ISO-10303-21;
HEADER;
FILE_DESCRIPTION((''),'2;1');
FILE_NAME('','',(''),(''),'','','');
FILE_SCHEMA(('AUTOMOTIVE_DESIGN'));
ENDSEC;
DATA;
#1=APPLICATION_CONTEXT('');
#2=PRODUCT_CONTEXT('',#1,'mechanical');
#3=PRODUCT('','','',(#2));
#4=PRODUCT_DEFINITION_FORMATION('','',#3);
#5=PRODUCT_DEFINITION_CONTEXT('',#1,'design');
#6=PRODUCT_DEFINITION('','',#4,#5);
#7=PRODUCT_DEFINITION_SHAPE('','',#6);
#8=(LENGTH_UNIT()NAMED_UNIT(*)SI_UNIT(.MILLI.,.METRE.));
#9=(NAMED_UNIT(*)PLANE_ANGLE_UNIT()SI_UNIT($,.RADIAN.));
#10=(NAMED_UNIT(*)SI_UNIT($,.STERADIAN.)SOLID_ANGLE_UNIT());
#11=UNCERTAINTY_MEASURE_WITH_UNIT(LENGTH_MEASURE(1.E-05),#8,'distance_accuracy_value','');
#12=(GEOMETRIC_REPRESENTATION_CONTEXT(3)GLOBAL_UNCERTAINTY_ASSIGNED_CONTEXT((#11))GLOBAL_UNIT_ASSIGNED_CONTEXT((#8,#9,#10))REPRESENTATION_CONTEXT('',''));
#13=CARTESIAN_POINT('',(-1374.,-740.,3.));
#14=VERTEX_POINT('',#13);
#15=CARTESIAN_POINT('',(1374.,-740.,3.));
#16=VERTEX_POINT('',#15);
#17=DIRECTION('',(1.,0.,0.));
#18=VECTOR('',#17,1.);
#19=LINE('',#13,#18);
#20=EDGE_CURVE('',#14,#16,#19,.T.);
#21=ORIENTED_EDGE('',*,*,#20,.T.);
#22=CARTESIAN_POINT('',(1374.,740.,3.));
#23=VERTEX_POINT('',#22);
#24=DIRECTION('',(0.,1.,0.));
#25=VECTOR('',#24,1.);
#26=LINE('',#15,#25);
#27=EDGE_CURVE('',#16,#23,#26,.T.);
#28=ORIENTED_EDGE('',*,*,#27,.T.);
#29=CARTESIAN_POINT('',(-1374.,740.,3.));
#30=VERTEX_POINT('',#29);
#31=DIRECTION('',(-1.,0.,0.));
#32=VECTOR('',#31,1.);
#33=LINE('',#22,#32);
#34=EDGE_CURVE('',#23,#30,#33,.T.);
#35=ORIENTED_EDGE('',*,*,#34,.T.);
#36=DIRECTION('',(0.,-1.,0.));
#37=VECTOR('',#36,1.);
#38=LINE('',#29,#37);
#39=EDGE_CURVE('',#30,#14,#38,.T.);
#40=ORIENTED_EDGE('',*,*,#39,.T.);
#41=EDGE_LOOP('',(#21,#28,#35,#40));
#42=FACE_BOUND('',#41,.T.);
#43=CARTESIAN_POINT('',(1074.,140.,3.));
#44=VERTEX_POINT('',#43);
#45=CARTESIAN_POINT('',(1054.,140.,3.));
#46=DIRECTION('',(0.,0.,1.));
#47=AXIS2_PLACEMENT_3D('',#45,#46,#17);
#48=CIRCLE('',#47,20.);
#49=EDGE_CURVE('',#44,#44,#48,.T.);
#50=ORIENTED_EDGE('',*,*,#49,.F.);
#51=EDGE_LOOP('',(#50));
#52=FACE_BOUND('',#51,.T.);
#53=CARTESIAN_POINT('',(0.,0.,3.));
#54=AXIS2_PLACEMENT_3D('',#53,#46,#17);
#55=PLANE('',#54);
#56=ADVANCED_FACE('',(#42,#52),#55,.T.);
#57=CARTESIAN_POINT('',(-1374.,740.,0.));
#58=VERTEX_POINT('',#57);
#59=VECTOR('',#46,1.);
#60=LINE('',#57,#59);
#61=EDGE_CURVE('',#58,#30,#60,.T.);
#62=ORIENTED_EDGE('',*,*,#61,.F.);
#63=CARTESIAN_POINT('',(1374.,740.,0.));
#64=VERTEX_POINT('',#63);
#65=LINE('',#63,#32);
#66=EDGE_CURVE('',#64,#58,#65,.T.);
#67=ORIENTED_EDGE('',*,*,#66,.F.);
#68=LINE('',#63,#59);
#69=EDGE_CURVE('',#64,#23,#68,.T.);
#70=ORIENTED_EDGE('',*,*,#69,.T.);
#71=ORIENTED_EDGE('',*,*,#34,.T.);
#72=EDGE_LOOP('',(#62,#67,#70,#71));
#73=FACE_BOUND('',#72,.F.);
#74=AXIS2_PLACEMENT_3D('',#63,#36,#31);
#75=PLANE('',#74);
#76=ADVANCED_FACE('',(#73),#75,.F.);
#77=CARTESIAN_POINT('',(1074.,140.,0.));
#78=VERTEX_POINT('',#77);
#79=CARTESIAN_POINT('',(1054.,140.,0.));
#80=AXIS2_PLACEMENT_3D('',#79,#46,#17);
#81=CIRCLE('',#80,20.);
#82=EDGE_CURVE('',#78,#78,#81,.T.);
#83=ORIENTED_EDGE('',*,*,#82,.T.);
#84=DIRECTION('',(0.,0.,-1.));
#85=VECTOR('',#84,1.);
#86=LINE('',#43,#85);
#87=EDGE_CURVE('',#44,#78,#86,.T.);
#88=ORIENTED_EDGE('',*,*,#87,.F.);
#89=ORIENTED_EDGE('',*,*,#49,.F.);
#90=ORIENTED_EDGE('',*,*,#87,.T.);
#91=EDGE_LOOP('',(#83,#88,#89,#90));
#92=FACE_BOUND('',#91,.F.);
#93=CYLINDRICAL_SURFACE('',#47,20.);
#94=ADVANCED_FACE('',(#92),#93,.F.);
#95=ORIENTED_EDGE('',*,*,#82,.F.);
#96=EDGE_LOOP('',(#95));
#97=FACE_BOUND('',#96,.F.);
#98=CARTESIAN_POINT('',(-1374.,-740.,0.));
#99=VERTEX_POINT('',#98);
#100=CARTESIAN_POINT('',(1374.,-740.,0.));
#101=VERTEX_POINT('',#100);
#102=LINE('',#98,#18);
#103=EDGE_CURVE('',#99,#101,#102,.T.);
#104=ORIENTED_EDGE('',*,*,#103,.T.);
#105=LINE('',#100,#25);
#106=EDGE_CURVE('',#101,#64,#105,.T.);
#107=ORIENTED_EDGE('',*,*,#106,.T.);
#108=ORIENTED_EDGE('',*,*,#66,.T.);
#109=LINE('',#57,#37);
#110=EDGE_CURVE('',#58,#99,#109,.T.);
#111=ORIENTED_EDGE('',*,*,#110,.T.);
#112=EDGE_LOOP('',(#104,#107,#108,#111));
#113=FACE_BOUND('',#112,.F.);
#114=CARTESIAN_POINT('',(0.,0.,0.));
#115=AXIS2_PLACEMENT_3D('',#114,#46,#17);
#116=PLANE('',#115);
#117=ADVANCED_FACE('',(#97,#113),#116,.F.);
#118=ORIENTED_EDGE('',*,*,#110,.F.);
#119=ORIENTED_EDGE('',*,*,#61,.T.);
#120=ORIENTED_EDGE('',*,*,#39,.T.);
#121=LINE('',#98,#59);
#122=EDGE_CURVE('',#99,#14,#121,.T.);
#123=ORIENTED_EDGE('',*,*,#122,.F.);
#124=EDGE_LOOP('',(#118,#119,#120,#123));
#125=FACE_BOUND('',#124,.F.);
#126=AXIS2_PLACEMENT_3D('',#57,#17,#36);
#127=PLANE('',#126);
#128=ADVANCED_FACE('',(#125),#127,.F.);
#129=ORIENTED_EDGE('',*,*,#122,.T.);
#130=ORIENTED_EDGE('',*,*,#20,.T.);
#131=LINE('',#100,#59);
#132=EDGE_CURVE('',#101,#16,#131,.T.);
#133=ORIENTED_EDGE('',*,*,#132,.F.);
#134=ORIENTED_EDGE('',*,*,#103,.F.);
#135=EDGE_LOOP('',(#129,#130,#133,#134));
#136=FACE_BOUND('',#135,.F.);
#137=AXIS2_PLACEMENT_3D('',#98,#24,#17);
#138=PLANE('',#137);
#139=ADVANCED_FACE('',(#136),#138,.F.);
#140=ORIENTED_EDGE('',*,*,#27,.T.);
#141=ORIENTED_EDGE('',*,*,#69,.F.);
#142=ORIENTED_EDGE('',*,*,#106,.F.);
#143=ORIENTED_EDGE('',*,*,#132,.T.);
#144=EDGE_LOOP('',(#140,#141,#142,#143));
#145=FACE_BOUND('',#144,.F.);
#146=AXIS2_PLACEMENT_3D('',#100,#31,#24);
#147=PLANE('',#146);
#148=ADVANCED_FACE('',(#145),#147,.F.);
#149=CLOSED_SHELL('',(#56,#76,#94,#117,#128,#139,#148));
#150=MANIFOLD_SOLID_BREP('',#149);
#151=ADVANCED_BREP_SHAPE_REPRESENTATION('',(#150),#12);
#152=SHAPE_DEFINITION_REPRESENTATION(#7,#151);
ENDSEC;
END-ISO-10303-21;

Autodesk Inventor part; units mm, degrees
ref_plane "YZ Plane" through (0, 0, 0) normal (1, 0, 0) x (0, 1, 0)
ref_plane "XZ Plane" through (0, 0, 0) normal (0, 1, 0) x (-1, 0, 0)
ref_plane "XY Plane" through (0, 0, 0) normal (0, 0, 1) x (1, 0, 0)
sketch "Sketch1" plane through (0, 0, 0) normal (0, 0, 1) x (1, 0, 0)
  line L0 (-1374, -740) -> (1374, -740)
  line L1 (1374, -740) -> (1374, 740)
  line L2 (1374, 740) -> (-1374, 740)
  line L3 (-1374, 740) -> (-1374, -740)
  line L4 (-1374, -740) -> (1374, 740) construction
  line L5 (1374, -740) -> (-1374, 740) construction
  point P0 (0, 0)
  dimension "d0" = 2748
  dimension "d1" = 1480
extrude "Plate1" add sketch "Sketch1" along normal blind 3
sketch "Sketch5" plane through (0, 0, 3) normal (0, 0, 1) x (1, 0, 0)
  line L0 (1349, 715) -> (1349, 515) construction
  line L1 (1349, 515) -> (1334, 515) construction
  line L2 (1334, 515) -> (1334, 715) construction
  line L3 (1334, 715) -> (1349, 715) construction
  line L4 (1374, 740) -> (1374, -740) projected
  line L5 (-1374, 740) -> (1374, 740) projected
  point P0 (0, 0)
  dimension "d26" = 200
  dimension "d27" = 15
  dimension "d28" = 25
  dimension "d29" = 25
mark "Mark1"
sketch "Sketch6" plane through (-1374, -740, 3) normal (0, 0, 1) x (1, 0, 0)
  circle A0 centre (2428, 880) radius 20
  line L0 (0, 1480) -> (2748, 1480) projected
  line L1 (2748, 1480) -> (2748, 0) projected
  point P0 (1374, 740)
  dimension "d30" = 40
  dimension "d31" = 600
  dimension "d32" = 320
extrude "Extrusion2" cut sketch "Sketch6" against normal up to surface (3 mm away)
equation "\"d2\" = Thickness"
equation "\"BendReliefWidth\" = Thickness"
equation "\"BendReliefDepth\" = 0.5 * Thickness"
equation "\"CornerReliefSize\" = 4 * Thickness"
equation "\"MinimumRemnant\" = 2 * Thickness"
equation "\"TransitionRadius\" = BendRadius"
equation "\"JacobiRadiusSize\" = BendRadius"
equation "\"GapSize\" = Thickness"
equation "\"Thickness\" = 3"
equation "\"BendRadius\" = 5"
properties part number "BSH 042 board" material "09g2s"
